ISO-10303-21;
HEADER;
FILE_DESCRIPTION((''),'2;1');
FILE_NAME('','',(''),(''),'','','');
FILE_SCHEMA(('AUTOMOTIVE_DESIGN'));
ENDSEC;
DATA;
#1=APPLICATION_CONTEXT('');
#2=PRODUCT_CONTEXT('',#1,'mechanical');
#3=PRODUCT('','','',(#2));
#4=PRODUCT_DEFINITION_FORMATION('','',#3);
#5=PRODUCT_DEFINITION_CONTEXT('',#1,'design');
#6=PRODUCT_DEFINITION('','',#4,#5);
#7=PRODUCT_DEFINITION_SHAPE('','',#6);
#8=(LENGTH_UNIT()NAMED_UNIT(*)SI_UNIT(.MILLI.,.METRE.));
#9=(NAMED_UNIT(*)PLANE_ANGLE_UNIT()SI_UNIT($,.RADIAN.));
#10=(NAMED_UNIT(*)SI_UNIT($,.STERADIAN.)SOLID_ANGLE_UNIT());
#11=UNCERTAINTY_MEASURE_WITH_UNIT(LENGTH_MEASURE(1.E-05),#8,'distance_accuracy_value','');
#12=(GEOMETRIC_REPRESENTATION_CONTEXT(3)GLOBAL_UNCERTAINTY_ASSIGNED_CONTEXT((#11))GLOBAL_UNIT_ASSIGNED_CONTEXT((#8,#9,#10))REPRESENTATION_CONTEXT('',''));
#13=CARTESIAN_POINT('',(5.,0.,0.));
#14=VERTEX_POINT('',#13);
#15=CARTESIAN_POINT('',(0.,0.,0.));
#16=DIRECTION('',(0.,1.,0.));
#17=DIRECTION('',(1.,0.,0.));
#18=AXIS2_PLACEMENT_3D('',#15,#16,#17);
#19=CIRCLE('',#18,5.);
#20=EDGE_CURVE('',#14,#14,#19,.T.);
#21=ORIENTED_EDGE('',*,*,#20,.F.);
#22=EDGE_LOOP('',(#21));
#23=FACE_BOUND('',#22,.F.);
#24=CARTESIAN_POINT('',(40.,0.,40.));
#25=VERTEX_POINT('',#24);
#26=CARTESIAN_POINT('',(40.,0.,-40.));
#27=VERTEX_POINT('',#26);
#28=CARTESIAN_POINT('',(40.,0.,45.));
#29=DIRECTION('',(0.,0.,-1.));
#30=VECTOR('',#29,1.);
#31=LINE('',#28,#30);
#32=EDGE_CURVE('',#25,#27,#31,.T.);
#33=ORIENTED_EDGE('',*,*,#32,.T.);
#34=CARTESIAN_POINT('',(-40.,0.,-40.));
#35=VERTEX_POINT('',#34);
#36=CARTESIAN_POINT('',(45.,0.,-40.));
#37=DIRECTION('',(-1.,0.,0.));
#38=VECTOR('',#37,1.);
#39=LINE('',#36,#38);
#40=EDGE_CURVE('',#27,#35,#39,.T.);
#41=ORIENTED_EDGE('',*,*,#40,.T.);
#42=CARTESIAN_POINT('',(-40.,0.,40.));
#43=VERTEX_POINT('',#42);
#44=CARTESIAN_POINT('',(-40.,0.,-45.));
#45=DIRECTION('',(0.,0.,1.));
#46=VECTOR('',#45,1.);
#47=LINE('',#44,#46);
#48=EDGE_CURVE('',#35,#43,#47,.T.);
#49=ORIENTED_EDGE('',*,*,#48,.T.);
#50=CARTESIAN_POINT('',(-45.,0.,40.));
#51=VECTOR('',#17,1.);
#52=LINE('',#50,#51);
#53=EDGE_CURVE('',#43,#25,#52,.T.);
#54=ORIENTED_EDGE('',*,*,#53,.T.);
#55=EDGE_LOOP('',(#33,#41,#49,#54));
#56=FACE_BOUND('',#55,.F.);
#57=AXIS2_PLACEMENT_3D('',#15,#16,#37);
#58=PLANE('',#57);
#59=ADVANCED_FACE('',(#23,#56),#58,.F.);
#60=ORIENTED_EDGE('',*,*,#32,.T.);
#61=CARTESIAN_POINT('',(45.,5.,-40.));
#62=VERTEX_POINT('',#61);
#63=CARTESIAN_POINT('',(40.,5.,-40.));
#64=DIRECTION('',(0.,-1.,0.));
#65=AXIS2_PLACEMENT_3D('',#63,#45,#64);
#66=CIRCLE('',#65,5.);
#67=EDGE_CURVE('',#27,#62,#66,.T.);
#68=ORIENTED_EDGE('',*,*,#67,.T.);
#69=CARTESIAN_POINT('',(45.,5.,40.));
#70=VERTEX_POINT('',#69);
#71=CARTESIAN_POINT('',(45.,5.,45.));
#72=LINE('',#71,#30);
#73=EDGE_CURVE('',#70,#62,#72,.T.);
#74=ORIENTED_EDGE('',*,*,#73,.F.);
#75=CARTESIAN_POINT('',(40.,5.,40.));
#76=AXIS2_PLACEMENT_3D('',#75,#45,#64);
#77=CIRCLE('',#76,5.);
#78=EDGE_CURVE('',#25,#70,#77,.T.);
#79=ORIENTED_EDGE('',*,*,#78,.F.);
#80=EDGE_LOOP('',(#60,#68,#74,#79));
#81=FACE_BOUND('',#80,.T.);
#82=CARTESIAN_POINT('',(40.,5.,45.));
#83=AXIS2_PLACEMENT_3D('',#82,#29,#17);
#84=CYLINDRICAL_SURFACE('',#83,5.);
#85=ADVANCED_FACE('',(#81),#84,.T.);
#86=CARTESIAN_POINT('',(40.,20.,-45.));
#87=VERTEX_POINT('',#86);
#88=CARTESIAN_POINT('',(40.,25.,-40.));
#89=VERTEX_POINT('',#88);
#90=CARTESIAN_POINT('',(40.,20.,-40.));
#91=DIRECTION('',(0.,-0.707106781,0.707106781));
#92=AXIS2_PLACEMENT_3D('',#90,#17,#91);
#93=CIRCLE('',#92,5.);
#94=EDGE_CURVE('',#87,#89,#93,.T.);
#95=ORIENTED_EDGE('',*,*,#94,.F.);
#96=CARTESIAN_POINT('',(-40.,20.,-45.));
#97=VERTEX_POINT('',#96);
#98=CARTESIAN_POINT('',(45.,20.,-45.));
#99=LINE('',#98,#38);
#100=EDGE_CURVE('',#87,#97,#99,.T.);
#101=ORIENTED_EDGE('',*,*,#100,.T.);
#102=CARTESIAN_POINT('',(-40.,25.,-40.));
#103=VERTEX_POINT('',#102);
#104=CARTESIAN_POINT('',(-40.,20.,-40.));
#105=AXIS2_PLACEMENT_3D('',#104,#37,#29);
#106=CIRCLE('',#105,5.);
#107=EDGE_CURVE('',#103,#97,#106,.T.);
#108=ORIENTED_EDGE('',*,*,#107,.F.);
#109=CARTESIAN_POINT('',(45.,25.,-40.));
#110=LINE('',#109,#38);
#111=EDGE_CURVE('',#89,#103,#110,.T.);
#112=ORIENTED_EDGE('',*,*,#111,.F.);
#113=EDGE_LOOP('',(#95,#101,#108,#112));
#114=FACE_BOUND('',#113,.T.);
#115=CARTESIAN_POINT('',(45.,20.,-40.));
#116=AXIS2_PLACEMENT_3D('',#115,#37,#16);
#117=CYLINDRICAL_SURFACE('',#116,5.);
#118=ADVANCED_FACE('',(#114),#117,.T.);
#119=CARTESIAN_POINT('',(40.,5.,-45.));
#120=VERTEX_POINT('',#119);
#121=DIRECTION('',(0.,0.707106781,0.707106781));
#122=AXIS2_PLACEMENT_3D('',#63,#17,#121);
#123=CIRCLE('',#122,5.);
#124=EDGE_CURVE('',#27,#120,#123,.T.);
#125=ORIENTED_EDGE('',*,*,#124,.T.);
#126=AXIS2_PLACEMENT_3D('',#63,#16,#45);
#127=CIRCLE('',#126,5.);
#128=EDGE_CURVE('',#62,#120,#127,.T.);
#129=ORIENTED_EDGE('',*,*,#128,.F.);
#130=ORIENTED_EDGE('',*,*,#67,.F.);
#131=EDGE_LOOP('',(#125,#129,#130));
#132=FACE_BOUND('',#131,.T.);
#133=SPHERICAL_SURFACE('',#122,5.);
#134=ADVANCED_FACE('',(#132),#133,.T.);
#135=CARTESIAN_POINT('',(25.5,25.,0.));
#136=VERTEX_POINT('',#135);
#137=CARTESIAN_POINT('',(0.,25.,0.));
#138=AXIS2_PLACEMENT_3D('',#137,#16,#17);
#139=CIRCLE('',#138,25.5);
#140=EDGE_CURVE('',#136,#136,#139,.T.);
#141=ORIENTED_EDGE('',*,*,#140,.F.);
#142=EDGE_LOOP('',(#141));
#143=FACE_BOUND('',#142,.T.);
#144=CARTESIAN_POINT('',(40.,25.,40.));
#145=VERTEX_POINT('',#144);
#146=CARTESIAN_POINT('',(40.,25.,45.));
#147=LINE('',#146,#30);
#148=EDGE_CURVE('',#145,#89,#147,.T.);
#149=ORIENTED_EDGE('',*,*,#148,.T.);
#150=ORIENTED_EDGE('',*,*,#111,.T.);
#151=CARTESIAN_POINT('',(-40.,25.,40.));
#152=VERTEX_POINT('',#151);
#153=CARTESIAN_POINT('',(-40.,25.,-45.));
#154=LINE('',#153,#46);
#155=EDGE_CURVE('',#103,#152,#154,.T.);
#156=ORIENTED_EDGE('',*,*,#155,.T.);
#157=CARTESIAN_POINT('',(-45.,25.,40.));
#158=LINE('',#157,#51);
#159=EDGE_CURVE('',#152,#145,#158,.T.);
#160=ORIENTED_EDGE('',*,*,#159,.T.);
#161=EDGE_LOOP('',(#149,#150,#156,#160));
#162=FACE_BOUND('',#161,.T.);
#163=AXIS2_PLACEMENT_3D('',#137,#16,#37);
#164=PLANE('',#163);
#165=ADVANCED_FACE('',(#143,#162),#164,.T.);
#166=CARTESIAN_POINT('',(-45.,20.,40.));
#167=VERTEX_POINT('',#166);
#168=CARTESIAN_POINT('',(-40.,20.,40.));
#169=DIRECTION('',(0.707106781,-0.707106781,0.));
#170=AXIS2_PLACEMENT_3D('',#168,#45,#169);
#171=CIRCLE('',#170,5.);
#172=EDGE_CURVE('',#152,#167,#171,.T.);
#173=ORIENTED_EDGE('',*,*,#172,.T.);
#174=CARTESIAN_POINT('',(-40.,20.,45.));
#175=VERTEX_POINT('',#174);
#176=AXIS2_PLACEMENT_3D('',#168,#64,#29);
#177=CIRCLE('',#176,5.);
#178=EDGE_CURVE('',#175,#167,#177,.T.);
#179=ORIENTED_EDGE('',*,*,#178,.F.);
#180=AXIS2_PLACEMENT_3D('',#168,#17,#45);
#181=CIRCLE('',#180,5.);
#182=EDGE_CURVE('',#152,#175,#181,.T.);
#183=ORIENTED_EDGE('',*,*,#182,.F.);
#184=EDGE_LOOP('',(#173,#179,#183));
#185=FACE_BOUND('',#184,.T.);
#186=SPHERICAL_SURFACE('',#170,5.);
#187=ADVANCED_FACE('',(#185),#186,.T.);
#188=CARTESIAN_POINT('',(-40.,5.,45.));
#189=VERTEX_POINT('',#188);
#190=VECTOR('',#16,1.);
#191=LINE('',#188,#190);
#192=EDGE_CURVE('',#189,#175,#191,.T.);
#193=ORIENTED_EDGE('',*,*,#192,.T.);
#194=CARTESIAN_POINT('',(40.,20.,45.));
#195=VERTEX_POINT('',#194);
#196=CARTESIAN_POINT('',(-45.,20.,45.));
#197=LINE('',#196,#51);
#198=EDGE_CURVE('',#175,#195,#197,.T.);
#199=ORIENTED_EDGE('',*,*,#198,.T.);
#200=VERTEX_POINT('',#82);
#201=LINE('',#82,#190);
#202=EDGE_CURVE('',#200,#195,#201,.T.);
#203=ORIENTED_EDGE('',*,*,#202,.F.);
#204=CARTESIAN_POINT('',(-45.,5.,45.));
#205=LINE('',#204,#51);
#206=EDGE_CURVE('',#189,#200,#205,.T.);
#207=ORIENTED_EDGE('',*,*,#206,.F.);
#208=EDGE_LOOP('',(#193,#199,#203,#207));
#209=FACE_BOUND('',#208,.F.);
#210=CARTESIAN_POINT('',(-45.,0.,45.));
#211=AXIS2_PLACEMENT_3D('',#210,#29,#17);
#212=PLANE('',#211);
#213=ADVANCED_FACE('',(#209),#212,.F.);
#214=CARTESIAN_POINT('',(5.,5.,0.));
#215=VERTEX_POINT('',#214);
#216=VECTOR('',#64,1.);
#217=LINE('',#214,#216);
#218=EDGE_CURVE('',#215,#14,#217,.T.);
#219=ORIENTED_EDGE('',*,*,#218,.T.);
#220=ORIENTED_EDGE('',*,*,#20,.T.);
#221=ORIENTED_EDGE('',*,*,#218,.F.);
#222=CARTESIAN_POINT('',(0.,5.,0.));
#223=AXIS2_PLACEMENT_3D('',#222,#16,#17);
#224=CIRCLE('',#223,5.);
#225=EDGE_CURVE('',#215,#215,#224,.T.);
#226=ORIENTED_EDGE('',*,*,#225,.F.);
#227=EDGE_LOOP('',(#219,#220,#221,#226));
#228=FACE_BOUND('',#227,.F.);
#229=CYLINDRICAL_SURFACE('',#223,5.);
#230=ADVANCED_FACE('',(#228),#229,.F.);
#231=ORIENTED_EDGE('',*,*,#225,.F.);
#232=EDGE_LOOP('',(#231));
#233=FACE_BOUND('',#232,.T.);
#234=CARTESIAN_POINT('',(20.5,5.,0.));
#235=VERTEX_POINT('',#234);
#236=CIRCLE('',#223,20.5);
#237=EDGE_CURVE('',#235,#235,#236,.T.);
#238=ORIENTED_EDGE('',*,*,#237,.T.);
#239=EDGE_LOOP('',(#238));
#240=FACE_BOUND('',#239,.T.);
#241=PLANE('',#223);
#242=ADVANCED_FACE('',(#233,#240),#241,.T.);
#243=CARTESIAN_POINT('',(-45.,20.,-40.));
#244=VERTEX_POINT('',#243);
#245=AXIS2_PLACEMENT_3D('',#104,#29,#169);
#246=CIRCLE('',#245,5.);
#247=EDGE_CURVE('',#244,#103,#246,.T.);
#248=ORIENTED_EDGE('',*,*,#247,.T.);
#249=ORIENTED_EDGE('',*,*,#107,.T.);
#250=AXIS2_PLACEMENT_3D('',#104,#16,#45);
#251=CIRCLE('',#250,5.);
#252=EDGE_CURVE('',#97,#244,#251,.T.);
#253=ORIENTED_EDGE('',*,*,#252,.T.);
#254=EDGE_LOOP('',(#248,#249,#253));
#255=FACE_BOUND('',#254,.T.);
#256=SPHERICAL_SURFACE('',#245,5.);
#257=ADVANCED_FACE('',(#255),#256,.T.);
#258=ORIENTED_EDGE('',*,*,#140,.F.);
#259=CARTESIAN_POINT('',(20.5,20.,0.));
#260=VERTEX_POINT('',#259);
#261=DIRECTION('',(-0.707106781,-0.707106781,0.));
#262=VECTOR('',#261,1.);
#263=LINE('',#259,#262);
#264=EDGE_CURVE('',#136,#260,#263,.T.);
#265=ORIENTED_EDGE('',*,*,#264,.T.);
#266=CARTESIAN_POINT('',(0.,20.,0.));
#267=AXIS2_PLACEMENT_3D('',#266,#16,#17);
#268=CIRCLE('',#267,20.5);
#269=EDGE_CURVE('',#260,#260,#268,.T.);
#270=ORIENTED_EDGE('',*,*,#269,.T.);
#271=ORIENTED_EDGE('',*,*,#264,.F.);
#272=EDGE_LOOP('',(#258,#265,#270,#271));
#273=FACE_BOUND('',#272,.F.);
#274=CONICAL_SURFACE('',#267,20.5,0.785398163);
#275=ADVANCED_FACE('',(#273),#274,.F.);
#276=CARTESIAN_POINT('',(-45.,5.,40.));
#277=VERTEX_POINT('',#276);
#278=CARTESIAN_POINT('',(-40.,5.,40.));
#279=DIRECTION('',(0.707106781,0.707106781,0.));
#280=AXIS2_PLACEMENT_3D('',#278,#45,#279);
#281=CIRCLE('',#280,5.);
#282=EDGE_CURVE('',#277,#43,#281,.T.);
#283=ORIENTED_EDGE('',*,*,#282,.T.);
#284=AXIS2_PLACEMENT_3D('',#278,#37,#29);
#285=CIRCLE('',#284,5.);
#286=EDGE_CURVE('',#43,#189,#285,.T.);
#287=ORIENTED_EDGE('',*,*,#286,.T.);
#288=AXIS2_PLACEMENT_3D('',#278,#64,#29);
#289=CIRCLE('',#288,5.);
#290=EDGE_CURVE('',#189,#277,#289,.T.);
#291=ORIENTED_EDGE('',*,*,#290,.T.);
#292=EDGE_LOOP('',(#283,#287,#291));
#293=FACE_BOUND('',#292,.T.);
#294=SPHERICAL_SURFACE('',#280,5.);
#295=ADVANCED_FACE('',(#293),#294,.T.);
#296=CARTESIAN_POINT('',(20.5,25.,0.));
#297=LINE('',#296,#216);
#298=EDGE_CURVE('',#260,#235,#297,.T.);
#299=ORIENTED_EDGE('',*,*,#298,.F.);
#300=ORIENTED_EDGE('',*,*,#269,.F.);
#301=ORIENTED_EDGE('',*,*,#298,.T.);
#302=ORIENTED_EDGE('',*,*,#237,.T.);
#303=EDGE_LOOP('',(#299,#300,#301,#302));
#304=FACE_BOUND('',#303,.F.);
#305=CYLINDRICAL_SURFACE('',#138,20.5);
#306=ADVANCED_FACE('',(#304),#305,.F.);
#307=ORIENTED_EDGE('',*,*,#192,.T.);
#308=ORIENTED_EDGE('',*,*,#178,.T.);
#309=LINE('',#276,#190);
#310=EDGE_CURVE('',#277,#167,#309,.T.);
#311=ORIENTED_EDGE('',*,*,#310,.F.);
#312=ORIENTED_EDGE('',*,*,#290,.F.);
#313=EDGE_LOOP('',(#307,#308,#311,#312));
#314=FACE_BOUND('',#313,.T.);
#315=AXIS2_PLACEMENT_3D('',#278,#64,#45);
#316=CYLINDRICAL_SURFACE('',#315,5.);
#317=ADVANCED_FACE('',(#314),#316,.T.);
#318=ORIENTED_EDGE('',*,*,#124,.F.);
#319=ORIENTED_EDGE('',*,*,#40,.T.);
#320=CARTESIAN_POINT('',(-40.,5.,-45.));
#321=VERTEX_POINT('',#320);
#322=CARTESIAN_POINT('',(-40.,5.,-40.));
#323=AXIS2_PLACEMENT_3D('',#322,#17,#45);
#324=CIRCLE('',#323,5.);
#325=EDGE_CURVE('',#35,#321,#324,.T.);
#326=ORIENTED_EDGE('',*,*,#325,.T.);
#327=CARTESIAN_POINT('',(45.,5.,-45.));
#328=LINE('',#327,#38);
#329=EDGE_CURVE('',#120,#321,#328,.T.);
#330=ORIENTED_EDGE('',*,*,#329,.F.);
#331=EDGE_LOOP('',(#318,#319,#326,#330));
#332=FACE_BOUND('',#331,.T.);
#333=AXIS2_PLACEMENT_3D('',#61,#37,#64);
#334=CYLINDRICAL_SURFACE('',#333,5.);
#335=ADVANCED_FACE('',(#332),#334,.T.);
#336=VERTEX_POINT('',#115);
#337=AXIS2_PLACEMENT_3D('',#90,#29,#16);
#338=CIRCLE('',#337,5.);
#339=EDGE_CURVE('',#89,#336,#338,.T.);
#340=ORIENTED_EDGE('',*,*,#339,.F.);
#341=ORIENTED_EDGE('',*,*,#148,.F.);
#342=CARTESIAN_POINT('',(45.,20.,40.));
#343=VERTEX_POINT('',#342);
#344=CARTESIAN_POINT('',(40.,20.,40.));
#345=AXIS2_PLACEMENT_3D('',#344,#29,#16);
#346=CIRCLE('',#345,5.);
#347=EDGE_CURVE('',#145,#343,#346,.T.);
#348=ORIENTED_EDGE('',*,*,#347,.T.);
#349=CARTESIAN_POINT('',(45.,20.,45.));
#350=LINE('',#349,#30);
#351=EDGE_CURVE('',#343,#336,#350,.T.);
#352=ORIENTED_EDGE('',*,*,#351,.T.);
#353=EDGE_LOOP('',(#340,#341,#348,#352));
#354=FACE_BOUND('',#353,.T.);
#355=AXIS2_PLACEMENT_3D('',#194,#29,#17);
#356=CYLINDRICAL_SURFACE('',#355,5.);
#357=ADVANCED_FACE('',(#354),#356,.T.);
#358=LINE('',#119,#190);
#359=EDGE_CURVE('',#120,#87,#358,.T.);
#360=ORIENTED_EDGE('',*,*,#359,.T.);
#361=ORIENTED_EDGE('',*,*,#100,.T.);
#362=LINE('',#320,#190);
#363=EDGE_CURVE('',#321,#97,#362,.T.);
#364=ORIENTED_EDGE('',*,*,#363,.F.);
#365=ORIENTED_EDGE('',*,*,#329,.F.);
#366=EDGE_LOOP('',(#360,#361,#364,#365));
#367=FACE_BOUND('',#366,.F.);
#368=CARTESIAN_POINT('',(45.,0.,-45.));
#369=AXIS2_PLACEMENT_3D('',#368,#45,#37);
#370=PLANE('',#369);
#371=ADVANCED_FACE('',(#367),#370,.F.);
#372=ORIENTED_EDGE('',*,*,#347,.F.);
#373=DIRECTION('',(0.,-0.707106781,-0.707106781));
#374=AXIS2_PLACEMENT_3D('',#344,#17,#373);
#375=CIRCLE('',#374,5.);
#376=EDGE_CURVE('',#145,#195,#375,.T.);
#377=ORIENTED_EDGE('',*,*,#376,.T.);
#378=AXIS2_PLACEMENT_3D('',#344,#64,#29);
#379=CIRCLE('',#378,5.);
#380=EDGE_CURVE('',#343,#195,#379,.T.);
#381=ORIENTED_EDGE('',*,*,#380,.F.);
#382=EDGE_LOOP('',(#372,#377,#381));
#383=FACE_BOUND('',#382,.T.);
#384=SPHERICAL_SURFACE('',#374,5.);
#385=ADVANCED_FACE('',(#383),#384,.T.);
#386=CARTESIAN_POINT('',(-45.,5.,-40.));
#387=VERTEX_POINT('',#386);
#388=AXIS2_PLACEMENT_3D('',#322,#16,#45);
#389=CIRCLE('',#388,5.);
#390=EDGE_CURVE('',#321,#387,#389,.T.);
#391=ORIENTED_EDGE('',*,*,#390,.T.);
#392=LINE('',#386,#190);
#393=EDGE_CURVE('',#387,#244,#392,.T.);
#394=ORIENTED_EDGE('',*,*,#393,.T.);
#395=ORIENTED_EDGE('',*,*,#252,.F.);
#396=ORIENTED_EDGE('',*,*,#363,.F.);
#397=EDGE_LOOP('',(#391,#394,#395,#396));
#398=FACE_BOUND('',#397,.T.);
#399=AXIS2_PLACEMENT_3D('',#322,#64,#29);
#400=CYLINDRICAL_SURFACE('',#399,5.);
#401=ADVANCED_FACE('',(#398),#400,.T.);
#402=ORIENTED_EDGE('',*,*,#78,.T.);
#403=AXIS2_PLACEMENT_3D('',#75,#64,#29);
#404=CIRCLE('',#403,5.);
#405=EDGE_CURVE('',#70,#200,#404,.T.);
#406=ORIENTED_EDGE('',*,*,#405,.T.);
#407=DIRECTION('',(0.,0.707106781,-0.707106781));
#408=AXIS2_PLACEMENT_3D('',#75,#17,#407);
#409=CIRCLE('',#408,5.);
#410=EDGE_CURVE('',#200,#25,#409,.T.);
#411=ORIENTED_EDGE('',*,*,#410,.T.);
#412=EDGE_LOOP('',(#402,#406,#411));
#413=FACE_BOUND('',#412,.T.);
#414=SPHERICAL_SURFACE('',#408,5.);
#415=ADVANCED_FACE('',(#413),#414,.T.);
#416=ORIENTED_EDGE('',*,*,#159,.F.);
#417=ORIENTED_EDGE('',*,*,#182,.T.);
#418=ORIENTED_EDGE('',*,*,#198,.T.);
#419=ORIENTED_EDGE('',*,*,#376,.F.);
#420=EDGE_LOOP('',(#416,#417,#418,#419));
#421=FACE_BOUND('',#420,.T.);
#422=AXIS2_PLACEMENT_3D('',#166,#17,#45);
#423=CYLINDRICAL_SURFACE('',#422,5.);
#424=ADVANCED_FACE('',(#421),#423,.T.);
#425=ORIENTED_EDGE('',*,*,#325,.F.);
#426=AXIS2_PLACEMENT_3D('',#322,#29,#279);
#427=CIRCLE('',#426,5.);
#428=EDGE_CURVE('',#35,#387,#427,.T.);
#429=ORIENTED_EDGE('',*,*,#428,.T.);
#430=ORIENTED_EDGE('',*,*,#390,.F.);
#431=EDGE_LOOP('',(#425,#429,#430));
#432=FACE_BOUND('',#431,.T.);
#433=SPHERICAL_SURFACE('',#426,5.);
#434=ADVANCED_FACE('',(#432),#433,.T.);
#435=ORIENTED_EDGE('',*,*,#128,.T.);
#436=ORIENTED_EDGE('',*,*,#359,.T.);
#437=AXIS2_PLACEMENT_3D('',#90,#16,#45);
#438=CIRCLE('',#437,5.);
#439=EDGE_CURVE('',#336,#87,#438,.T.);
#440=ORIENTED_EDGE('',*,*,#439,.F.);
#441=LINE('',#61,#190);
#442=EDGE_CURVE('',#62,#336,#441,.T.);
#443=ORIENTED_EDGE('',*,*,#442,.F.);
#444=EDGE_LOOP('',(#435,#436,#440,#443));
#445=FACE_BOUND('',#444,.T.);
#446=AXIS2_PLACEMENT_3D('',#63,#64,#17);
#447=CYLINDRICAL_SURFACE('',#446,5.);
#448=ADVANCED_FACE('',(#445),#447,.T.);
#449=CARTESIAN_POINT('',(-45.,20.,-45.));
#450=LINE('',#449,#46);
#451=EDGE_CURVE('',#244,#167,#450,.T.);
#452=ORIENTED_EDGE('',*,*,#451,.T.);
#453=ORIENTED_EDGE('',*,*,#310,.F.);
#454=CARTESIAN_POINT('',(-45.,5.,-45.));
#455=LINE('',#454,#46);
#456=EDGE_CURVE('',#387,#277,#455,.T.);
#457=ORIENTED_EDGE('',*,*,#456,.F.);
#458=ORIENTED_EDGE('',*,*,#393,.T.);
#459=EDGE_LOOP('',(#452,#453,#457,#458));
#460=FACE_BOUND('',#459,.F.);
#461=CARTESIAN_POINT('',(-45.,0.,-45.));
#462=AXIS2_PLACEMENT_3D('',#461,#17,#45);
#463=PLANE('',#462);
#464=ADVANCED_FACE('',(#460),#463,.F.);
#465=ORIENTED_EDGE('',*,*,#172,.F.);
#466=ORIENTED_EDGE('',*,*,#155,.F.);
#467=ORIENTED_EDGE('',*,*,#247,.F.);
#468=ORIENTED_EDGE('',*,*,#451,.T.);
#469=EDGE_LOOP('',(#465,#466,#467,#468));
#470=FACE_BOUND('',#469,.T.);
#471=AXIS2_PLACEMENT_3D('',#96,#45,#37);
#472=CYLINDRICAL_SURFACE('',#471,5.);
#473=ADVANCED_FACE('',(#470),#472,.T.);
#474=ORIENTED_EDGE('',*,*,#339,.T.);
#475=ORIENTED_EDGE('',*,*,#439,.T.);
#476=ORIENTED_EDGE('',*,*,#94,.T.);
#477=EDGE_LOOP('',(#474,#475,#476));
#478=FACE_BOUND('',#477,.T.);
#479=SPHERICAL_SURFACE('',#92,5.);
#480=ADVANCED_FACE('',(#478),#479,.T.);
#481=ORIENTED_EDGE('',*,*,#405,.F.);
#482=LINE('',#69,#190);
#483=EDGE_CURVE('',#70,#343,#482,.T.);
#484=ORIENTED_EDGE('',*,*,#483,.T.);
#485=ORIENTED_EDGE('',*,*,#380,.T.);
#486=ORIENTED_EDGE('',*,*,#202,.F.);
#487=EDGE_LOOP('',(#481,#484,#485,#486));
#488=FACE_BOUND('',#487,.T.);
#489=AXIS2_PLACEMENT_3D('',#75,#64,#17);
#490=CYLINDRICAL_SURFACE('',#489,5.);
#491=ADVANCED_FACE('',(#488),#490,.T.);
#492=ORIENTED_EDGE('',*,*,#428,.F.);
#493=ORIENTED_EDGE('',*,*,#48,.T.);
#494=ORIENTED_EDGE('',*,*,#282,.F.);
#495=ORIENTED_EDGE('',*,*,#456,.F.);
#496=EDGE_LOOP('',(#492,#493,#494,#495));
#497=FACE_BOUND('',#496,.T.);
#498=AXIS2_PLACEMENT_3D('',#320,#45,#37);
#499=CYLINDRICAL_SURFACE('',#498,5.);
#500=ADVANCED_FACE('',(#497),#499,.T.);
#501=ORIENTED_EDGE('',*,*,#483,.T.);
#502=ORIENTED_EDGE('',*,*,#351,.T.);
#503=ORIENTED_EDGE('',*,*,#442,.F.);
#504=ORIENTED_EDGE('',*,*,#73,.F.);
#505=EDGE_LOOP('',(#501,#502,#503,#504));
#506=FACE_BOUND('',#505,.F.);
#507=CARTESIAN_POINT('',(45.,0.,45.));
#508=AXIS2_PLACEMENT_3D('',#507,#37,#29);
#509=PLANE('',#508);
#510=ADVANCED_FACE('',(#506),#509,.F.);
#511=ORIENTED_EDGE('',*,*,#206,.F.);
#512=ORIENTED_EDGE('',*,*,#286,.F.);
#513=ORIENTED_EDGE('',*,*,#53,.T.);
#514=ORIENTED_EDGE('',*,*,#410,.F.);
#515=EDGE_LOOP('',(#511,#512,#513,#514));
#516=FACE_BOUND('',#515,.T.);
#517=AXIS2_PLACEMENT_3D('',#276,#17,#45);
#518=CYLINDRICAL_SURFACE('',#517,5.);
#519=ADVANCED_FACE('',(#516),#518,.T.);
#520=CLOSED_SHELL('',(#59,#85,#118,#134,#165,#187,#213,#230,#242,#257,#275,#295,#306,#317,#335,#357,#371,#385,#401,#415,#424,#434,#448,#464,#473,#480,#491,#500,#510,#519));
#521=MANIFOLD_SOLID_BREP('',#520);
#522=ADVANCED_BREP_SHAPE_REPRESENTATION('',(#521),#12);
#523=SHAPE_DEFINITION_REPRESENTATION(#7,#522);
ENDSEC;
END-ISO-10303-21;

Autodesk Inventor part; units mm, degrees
ref_plane "YZ Plane" through (0, 0, 0) normal (1, 0, 0) x (0, 1, 0)
ref_plane "XZ Plane" through (0, 0, 0) normal (0, 1, 0) x (-1, 0, 0)
ref_plane "XY Plane" through (0, 0, 0) normal (0, 0, 1) x (1, 0, 0)
sketch "Sketch1" plane through (0, 0, 0) normal (0, 1, 0) x (-1, 0, 0)
  line L0 (45, 45) -> (-45, 45)
  line L1 (-45, 45) -> (-45, -45)
  line L2 (-45, -45) -> (45, -45)
  line L3 (45, -45) -> (45, 45)
  line L4 (45, 45) -> (-45, -45)
  line L5 (45, -45) -> (-45, 45)
  point P0 (0, 0)
  point P1 (0, 0)
  dimension "d0" = 90
  dimension "d1" = 90
extrude "Extrusion1" add sketch "Sketch1" along normal blind 25
sketch "Sketch5" plane through (0, 25, 0) normal (0, 1, 0) x (1, 0, 0)
  circle A0 centre (0, 0) radius 20.5
  dimension "d27" = 41
extrude "Extrusion3" cut sketch "Sketch5" against normal blind 20
sketch "Sketch6" plane through (0, 5, 0) normal (0, 1, 0) x (1, 0, 0)
  circle A0 centre (0, 0) radius 5
  dimension "d30" = 10
extrude "Extrusion4" cut sketch "Sketch6" against normal blind 20
fillet "Fillet2" radius 5 8 edges at (45, 0, 0) (0, 0, -45) (-45, 0, 0) (0, 0, 45) (45, 25, 0) (0, 25, -45) (-45, 25, 0) (0, 25, 45)
chamfer "Chamfer1" distance 5 angle 45 1 edges at (-20.5, 25, 0)
fillet "Fillet3" radius 5 12 edges at (43.5355, 23.5355, 43.5355) (43.5355, 1.4645, 43.5355) (45, 12.5, 45) (43.5355, 23.5355, -43.5355) (43.5355, 1.4645, -43.5355) (45, 12.5, -45) (-43.5355, 23.5355, 43.5355) (-43.5355, 1.4645, 43.5355) (-45, 12.5, 45) (-45, 12.5, -45) (-43.5355, 1.4645, -43.5355) (-43.5355, 23.5355, -43.5355)
properties part number "supportbalises_3DPrint"
